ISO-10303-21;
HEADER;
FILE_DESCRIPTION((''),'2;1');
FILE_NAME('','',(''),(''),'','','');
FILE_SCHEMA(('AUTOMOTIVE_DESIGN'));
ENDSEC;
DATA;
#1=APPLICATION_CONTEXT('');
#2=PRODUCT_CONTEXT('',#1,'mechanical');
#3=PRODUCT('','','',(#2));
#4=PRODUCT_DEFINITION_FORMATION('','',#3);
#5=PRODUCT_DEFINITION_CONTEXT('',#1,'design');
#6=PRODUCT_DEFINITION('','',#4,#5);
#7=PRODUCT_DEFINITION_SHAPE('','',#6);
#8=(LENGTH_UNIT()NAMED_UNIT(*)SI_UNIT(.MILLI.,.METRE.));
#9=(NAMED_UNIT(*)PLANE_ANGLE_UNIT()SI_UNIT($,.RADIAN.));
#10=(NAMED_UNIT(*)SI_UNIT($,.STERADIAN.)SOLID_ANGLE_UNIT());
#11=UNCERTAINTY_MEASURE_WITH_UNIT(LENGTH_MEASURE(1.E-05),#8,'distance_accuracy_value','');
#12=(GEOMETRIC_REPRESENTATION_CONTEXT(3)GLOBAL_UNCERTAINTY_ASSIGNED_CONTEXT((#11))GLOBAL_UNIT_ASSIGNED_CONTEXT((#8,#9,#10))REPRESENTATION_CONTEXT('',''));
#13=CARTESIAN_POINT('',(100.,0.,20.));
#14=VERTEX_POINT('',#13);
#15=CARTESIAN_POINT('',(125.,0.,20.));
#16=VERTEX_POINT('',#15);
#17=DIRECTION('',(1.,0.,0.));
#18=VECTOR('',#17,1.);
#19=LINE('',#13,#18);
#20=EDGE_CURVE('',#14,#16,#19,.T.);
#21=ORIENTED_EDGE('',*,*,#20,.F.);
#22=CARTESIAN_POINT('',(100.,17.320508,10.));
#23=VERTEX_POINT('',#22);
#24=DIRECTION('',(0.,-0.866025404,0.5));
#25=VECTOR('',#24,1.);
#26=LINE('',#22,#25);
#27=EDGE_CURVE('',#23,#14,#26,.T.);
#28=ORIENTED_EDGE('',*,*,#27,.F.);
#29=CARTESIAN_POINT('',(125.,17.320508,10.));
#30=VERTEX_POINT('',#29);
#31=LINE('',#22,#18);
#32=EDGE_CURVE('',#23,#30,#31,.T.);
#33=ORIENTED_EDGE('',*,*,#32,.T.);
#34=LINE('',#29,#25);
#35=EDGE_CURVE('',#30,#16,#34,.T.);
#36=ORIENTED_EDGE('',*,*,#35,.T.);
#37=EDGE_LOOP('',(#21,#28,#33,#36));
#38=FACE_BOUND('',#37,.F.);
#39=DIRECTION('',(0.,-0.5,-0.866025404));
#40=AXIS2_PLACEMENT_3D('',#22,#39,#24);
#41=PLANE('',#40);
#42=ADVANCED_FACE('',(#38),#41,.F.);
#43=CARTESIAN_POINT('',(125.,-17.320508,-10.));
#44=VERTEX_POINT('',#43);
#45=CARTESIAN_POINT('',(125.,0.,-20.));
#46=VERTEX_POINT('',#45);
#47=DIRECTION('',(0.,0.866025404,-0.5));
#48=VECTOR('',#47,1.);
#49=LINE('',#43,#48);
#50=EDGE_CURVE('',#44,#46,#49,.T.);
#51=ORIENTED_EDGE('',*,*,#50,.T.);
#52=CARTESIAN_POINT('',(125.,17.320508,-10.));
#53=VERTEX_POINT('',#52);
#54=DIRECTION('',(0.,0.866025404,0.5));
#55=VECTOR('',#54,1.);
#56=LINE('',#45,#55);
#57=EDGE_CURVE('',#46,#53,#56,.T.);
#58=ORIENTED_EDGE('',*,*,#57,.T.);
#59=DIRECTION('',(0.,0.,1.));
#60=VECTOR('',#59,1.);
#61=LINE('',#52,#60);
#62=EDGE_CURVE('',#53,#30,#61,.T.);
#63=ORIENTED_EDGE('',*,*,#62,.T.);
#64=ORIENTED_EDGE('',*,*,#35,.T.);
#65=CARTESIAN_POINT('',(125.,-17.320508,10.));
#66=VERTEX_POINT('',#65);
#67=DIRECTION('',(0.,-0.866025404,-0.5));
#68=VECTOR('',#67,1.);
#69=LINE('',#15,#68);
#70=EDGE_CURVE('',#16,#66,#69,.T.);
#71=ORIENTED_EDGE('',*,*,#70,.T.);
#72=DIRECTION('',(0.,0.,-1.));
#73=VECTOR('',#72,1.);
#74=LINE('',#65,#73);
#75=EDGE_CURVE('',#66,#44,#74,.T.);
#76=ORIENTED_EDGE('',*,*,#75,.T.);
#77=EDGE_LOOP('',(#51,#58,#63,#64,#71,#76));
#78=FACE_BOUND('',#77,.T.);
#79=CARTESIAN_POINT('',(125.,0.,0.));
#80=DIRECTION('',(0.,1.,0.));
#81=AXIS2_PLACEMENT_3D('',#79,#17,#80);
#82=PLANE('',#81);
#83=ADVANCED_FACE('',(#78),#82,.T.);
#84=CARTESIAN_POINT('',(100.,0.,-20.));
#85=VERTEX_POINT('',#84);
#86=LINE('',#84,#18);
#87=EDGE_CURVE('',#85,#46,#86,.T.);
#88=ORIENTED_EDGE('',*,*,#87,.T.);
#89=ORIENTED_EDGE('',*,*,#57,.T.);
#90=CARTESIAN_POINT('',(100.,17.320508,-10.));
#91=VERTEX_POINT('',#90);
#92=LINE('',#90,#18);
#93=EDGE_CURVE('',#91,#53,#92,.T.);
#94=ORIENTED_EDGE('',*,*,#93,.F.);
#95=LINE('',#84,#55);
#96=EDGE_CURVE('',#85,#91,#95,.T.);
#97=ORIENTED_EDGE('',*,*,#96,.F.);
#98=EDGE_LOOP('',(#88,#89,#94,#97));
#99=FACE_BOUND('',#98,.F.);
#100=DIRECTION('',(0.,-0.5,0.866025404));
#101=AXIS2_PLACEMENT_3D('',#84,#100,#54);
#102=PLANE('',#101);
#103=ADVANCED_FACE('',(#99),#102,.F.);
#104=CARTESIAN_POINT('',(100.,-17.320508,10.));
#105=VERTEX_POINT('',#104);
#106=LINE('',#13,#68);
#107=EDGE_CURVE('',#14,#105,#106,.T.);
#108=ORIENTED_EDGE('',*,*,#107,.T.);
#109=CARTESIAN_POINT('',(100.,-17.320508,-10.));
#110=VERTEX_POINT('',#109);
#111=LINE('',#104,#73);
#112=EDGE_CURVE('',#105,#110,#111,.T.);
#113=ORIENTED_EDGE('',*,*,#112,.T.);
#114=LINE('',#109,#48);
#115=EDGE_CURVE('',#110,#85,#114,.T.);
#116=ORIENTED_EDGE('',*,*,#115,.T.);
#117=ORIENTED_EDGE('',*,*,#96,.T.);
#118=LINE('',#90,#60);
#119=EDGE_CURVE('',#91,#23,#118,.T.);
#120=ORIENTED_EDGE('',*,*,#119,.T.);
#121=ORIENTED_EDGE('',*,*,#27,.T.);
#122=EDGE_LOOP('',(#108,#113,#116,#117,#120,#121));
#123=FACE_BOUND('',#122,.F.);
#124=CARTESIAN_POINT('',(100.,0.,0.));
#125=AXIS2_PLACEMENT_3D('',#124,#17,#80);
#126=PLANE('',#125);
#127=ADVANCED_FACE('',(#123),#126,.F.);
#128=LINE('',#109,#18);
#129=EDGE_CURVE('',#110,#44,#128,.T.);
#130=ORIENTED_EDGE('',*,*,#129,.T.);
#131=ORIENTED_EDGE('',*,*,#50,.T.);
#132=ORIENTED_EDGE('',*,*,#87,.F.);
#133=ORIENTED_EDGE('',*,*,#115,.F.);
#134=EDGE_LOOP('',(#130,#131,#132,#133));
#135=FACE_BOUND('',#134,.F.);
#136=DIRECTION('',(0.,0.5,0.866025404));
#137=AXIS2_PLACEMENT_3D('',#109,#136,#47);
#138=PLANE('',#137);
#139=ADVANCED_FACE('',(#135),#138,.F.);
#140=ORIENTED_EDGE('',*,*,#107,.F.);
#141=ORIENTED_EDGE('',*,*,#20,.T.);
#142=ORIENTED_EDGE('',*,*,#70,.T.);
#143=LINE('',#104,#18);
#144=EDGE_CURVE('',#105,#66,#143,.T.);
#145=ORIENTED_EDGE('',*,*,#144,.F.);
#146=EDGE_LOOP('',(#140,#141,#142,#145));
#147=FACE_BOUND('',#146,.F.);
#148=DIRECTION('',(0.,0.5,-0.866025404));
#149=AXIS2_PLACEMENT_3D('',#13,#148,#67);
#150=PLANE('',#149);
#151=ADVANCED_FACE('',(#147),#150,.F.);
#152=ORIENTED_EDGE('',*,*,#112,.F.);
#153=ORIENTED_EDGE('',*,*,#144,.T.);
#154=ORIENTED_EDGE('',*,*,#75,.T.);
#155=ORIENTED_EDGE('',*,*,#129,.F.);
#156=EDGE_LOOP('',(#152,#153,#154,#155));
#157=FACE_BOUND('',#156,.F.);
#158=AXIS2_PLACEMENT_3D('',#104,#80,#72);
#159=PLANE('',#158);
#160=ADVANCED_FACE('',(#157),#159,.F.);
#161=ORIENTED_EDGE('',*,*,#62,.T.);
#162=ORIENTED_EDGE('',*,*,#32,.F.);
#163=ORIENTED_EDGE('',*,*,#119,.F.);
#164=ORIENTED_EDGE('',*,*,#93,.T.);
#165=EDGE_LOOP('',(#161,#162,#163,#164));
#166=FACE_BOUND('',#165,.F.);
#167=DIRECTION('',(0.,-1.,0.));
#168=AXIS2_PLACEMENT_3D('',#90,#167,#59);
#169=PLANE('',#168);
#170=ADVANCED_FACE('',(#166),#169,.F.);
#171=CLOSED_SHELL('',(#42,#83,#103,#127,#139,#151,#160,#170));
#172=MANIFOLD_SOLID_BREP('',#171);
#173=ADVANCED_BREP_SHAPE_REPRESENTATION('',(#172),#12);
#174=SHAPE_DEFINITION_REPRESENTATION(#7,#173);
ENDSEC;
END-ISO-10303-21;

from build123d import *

# Parameters (mm, degrees)
F4_DEPTH = 25


# Not quite as in the source:
# - a feature of the source that left no trace in its solid (it failed there, or was rolled back) is left out
# - the program builds the solid bodies; features that only make, move or delete a surface that nothing else refers to are left out


with BuildPart() as f4:
    # F3 (on face) → F4 (new body)
    with BuildSketch(Plane.YZ.offset(100)):
        Polygon((17.3205080757, 10), (0, 20), (-17.3205080757, 10), (-17.3205080757, -10), (0, -20), (17.3205080757, -10), align=None)
    extrude(amount=F4_DEPTH)


solid = f4.part
